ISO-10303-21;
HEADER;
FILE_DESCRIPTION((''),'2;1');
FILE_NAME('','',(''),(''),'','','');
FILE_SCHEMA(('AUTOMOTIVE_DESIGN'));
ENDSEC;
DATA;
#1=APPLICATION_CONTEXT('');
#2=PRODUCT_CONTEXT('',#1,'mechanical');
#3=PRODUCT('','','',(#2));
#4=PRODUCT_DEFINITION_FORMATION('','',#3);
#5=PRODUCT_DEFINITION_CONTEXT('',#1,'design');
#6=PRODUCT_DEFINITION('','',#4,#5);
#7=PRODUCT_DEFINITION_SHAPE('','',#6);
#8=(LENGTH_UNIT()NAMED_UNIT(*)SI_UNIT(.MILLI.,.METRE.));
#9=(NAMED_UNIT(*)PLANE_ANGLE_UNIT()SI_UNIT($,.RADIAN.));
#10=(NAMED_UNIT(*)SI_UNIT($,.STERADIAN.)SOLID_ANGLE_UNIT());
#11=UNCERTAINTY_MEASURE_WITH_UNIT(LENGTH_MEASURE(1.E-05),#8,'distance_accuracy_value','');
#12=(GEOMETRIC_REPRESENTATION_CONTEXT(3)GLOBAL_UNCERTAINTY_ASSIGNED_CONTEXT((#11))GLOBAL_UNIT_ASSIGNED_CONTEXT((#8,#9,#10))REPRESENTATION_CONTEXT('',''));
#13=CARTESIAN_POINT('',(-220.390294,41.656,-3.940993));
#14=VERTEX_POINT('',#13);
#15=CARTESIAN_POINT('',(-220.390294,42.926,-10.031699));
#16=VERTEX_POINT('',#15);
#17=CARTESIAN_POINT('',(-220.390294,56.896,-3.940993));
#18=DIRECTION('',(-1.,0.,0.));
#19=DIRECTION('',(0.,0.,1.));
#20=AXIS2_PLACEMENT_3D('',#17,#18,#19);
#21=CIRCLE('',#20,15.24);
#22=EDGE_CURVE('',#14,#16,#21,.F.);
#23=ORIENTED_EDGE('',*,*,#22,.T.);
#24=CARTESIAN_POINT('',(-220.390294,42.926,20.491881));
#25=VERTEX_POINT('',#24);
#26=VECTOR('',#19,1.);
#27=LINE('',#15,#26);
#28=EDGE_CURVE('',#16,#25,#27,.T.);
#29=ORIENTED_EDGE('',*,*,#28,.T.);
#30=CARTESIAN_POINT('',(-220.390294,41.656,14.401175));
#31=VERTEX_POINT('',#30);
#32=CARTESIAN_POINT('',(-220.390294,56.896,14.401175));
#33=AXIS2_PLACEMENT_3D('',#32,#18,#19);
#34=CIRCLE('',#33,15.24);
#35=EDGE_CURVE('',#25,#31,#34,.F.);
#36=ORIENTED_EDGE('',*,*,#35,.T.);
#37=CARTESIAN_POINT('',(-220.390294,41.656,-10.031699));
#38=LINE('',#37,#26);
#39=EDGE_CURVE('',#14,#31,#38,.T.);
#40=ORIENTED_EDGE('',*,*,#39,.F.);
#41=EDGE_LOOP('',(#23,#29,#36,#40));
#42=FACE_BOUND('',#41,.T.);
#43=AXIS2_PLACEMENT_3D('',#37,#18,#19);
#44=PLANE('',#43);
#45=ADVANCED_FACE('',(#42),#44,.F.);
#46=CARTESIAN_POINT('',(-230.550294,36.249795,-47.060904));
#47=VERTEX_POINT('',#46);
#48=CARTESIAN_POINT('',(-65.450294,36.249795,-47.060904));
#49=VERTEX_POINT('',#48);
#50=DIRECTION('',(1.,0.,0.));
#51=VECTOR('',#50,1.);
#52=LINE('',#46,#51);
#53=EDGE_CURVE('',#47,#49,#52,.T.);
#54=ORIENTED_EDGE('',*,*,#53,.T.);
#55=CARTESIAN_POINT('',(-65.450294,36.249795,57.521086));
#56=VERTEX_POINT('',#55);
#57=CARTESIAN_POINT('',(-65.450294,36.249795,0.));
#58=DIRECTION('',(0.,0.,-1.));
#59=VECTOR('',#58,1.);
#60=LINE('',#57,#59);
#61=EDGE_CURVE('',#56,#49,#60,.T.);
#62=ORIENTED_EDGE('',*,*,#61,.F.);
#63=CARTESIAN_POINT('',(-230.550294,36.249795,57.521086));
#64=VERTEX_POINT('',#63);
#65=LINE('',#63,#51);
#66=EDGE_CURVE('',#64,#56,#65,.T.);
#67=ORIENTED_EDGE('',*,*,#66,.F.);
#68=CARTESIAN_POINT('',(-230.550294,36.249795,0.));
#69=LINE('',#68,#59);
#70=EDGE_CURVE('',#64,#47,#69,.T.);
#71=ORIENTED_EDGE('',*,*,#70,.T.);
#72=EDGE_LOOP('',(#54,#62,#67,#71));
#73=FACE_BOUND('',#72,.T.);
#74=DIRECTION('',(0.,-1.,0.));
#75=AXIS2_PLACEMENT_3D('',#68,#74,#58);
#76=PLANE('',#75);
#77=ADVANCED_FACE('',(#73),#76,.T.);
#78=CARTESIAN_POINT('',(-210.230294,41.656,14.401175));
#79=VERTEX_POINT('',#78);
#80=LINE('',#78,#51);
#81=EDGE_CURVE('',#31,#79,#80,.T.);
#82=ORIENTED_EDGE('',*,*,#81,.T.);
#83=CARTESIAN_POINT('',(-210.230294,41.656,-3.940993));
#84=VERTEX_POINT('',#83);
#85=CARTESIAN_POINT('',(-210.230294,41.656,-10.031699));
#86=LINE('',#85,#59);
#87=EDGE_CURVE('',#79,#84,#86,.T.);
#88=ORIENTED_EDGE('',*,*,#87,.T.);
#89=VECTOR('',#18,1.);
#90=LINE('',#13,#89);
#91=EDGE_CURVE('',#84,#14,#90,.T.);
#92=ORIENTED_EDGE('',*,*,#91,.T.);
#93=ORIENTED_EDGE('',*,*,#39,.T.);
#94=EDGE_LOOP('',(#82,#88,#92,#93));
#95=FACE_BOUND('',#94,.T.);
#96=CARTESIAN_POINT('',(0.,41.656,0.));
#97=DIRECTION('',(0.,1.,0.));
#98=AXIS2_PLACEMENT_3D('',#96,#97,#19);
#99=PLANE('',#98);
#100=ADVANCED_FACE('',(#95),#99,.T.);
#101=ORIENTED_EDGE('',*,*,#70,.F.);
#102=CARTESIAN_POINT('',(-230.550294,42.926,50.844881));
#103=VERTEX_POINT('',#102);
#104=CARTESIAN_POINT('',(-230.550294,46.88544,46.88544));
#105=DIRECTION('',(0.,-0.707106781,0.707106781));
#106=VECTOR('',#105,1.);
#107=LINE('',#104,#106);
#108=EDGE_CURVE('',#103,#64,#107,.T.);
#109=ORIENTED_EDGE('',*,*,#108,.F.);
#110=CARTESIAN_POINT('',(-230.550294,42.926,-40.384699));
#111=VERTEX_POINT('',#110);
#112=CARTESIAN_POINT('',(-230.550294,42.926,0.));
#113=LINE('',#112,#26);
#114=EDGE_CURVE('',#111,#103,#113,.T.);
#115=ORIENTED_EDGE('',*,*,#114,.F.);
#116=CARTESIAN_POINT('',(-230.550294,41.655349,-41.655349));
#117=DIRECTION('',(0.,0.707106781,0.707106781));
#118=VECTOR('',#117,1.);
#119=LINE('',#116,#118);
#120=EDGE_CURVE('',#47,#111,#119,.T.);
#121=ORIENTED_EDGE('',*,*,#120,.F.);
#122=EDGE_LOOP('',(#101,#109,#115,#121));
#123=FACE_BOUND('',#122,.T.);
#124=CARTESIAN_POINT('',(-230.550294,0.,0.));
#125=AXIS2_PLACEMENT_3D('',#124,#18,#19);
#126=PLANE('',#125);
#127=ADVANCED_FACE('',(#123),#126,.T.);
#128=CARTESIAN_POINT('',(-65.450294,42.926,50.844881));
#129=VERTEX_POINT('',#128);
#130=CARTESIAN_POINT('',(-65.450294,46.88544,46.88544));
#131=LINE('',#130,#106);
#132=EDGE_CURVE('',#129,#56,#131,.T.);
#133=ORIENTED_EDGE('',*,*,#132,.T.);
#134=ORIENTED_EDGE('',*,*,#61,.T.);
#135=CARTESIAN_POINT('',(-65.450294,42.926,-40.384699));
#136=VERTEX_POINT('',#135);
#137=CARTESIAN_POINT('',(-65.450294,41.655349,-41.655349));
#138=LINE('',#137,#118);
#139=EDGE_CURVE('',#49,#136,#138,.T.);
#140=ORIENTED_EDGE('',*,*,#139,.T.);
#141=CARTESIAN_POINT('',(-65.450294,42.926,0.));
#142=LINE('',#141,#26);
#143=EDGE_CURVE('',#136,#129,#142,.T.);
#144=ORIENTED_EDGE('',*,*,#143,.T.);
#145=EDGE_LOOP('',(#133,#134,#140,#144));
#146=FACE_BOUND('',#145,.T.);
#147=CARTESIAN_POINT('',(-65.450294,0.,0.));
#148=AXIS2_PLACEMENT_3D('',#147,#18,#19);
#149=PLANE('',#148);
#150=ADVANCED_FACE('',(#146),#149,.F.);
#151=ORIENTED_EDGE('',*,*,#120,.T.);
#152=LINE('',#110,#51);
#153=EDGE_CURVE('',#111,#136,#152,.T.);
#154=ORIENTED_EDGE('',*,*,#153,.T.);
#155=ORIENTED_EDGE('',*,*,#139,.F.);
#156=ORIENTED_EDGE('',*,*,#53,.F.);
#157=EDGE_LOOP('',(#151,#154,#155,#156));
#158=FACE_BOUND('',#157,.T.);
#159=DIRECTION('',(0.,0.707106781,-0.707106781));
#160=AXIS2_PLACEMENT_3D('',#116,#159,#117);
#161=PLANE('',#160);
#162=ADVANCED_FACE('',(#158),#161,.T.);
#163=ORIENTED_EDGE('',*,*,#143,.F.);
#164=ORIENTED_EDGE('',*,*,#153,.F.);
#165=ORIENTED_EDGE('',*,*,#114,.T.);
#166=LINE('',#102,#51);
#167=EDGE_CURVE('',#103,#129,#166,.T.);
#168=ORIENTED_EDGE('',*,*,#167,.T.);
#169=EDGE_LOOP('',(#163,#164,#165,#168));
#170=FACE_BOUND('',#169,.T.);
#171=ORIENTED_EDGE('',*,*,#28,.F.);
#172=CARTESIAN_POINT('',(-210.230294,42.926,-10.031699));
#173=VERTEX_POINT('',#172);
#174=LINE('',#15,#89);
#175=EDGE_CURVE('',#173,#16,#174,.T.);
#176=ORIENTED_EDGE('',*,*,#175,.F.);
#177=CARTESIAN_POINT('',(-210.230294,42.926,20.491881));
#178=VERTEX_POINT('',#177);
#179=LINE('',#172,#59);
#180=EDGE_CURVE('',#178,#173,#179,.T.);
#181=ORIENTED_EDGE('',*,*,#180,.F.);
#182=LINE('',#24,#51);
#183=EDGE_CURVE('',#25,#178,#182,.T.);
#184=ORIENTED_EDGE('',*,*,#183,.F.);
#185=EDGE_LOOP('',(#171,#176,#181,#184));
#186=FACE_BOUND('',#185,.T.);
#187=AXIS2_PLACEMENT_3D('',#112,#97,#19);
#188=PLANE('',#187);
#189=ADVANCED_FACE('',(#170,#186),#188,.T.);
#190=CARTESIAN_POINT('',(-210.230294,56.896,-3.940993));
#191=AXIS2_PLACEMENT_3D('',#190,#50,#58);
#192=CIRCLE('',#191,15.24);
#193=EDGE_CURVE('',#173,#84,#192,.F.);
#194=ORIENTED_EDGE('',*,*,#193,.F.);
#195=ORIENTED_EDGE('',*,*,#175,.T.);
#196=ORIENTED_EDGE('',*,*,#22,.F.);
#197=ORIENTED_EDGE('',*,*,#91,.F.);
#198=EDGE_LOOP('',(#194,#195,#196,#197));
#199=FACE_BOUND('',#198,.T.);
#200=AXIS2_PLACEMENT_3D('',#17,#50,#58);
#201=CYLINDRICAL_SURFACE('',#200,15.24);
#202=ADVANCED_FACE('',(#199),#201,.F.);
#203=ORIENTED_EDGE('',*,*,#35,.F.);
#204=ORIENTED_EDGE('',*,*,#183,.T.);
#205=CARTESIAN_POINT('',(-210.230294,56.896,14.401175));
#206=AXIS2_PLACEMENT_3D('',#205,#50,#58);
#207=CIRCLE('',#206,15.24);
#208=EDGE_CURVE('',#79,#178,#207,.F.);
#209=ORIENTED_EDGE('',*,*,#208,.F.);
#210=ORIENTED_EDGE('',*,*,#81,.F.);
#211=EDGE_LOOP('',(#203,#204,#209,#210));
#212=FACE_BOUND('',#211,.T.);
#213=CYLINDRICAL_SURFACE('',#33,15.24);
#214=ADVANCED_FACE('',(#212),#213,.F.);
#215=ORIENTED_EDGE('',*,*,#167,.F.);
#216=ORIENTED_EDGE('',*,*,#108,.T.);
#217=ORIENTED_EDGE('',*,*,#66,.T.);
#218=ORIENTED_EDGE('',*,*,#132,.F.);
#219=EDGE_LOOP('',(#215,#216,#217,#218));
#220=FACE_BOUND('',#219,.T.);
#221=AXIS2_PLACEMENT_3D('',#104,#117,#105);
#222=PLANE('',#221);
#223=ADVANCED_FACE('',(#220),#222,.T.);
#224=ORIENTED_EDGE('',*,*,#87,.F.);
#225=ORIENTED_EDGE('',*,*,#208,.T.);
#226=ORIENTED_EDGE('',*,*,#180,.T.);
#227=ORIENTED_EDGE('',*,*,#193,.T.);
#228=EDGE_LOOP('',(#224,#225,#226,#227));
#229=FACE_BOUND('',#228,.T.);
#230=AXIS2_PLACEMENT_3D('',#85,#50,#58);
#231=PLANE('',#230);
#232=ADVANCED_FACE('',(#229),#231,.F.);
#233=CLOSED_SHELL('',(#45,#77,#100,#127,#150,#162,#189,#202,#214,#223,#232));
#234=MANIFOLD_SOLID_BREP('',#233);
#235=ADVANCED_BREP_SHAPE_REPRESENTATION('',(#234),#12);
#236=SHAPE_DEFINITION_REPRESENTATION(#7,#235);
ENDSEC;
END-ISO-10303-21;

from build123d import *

# Parameters (mm, degrees)
NRG_PSU_CASE_1_START = -230.550293706
NRG_PSU_CASE_1_DEPTH = 165.1
SKETCH2_W            = 10.16
SKETCH2_H            = 30.52357951
CUT_EXTRUDE1_DEPTH   = 1.27
FILLET1_R            = 15.24


# Read off the part's stored shape, not the designer's step: -NRG_PSU_CASE-1
with BuildPart() as part:
    # -NRG_PSU_CASE-1 outline → -NRG_PSU_CASE-1 (new body)
    with BuildSketch(Plane.YZ.offset(NRG_PSU_CASE_1_START)):
        Polygon((42.926, 50.844880664), (36.249795103, 57.521085561), (36.249795103, -47.060903743), (42.926, -40.384698846), align=None)
    extrude(amount=NRG_PSU_CASE_1_DEPTH)

    # Sketch2 → Cut-Extrude1 (cut)
    with BuildSketch(Plane(origin=(0, 42.926, 0), x_dir=(1, 0, 0), z_dir=(0, 1, 0))):
        with Locations((-215.310293706, -5.230090909)):
            Rectangle(SKETCH2_W, SKETCH2_H)
    extrude(amount=-CUT_EXTRUDE1_DEPTH, mode=Mode.SUBTRACT)

    # Fillet1
    # the kernel refuses this fillet: 15.24 mm, written as the material it adds along each edge
    with BuildSketch(Plane(origin=(-195.00352862, 41.656, 20.491880664), x_dir=(0, 1, 0), z_dir=(-1, 0, 0)), Plane(origin=(-220.390293706, 41.656, -10.031698846), x_dir=(0, 1, 0), z_dir=(1, 0, 0))) as fillet1_piece_1:
        with BuildLine():
            CenterArc((15.24, 6.090706035), FILLET1_R, 180, 23.556464309)
            Line((0, 6.090706035), (0, 0))
            Line((0, 0), (1.27, 0))
        make_face()
    extrude(amount=25.386765087)


solid = part.part
